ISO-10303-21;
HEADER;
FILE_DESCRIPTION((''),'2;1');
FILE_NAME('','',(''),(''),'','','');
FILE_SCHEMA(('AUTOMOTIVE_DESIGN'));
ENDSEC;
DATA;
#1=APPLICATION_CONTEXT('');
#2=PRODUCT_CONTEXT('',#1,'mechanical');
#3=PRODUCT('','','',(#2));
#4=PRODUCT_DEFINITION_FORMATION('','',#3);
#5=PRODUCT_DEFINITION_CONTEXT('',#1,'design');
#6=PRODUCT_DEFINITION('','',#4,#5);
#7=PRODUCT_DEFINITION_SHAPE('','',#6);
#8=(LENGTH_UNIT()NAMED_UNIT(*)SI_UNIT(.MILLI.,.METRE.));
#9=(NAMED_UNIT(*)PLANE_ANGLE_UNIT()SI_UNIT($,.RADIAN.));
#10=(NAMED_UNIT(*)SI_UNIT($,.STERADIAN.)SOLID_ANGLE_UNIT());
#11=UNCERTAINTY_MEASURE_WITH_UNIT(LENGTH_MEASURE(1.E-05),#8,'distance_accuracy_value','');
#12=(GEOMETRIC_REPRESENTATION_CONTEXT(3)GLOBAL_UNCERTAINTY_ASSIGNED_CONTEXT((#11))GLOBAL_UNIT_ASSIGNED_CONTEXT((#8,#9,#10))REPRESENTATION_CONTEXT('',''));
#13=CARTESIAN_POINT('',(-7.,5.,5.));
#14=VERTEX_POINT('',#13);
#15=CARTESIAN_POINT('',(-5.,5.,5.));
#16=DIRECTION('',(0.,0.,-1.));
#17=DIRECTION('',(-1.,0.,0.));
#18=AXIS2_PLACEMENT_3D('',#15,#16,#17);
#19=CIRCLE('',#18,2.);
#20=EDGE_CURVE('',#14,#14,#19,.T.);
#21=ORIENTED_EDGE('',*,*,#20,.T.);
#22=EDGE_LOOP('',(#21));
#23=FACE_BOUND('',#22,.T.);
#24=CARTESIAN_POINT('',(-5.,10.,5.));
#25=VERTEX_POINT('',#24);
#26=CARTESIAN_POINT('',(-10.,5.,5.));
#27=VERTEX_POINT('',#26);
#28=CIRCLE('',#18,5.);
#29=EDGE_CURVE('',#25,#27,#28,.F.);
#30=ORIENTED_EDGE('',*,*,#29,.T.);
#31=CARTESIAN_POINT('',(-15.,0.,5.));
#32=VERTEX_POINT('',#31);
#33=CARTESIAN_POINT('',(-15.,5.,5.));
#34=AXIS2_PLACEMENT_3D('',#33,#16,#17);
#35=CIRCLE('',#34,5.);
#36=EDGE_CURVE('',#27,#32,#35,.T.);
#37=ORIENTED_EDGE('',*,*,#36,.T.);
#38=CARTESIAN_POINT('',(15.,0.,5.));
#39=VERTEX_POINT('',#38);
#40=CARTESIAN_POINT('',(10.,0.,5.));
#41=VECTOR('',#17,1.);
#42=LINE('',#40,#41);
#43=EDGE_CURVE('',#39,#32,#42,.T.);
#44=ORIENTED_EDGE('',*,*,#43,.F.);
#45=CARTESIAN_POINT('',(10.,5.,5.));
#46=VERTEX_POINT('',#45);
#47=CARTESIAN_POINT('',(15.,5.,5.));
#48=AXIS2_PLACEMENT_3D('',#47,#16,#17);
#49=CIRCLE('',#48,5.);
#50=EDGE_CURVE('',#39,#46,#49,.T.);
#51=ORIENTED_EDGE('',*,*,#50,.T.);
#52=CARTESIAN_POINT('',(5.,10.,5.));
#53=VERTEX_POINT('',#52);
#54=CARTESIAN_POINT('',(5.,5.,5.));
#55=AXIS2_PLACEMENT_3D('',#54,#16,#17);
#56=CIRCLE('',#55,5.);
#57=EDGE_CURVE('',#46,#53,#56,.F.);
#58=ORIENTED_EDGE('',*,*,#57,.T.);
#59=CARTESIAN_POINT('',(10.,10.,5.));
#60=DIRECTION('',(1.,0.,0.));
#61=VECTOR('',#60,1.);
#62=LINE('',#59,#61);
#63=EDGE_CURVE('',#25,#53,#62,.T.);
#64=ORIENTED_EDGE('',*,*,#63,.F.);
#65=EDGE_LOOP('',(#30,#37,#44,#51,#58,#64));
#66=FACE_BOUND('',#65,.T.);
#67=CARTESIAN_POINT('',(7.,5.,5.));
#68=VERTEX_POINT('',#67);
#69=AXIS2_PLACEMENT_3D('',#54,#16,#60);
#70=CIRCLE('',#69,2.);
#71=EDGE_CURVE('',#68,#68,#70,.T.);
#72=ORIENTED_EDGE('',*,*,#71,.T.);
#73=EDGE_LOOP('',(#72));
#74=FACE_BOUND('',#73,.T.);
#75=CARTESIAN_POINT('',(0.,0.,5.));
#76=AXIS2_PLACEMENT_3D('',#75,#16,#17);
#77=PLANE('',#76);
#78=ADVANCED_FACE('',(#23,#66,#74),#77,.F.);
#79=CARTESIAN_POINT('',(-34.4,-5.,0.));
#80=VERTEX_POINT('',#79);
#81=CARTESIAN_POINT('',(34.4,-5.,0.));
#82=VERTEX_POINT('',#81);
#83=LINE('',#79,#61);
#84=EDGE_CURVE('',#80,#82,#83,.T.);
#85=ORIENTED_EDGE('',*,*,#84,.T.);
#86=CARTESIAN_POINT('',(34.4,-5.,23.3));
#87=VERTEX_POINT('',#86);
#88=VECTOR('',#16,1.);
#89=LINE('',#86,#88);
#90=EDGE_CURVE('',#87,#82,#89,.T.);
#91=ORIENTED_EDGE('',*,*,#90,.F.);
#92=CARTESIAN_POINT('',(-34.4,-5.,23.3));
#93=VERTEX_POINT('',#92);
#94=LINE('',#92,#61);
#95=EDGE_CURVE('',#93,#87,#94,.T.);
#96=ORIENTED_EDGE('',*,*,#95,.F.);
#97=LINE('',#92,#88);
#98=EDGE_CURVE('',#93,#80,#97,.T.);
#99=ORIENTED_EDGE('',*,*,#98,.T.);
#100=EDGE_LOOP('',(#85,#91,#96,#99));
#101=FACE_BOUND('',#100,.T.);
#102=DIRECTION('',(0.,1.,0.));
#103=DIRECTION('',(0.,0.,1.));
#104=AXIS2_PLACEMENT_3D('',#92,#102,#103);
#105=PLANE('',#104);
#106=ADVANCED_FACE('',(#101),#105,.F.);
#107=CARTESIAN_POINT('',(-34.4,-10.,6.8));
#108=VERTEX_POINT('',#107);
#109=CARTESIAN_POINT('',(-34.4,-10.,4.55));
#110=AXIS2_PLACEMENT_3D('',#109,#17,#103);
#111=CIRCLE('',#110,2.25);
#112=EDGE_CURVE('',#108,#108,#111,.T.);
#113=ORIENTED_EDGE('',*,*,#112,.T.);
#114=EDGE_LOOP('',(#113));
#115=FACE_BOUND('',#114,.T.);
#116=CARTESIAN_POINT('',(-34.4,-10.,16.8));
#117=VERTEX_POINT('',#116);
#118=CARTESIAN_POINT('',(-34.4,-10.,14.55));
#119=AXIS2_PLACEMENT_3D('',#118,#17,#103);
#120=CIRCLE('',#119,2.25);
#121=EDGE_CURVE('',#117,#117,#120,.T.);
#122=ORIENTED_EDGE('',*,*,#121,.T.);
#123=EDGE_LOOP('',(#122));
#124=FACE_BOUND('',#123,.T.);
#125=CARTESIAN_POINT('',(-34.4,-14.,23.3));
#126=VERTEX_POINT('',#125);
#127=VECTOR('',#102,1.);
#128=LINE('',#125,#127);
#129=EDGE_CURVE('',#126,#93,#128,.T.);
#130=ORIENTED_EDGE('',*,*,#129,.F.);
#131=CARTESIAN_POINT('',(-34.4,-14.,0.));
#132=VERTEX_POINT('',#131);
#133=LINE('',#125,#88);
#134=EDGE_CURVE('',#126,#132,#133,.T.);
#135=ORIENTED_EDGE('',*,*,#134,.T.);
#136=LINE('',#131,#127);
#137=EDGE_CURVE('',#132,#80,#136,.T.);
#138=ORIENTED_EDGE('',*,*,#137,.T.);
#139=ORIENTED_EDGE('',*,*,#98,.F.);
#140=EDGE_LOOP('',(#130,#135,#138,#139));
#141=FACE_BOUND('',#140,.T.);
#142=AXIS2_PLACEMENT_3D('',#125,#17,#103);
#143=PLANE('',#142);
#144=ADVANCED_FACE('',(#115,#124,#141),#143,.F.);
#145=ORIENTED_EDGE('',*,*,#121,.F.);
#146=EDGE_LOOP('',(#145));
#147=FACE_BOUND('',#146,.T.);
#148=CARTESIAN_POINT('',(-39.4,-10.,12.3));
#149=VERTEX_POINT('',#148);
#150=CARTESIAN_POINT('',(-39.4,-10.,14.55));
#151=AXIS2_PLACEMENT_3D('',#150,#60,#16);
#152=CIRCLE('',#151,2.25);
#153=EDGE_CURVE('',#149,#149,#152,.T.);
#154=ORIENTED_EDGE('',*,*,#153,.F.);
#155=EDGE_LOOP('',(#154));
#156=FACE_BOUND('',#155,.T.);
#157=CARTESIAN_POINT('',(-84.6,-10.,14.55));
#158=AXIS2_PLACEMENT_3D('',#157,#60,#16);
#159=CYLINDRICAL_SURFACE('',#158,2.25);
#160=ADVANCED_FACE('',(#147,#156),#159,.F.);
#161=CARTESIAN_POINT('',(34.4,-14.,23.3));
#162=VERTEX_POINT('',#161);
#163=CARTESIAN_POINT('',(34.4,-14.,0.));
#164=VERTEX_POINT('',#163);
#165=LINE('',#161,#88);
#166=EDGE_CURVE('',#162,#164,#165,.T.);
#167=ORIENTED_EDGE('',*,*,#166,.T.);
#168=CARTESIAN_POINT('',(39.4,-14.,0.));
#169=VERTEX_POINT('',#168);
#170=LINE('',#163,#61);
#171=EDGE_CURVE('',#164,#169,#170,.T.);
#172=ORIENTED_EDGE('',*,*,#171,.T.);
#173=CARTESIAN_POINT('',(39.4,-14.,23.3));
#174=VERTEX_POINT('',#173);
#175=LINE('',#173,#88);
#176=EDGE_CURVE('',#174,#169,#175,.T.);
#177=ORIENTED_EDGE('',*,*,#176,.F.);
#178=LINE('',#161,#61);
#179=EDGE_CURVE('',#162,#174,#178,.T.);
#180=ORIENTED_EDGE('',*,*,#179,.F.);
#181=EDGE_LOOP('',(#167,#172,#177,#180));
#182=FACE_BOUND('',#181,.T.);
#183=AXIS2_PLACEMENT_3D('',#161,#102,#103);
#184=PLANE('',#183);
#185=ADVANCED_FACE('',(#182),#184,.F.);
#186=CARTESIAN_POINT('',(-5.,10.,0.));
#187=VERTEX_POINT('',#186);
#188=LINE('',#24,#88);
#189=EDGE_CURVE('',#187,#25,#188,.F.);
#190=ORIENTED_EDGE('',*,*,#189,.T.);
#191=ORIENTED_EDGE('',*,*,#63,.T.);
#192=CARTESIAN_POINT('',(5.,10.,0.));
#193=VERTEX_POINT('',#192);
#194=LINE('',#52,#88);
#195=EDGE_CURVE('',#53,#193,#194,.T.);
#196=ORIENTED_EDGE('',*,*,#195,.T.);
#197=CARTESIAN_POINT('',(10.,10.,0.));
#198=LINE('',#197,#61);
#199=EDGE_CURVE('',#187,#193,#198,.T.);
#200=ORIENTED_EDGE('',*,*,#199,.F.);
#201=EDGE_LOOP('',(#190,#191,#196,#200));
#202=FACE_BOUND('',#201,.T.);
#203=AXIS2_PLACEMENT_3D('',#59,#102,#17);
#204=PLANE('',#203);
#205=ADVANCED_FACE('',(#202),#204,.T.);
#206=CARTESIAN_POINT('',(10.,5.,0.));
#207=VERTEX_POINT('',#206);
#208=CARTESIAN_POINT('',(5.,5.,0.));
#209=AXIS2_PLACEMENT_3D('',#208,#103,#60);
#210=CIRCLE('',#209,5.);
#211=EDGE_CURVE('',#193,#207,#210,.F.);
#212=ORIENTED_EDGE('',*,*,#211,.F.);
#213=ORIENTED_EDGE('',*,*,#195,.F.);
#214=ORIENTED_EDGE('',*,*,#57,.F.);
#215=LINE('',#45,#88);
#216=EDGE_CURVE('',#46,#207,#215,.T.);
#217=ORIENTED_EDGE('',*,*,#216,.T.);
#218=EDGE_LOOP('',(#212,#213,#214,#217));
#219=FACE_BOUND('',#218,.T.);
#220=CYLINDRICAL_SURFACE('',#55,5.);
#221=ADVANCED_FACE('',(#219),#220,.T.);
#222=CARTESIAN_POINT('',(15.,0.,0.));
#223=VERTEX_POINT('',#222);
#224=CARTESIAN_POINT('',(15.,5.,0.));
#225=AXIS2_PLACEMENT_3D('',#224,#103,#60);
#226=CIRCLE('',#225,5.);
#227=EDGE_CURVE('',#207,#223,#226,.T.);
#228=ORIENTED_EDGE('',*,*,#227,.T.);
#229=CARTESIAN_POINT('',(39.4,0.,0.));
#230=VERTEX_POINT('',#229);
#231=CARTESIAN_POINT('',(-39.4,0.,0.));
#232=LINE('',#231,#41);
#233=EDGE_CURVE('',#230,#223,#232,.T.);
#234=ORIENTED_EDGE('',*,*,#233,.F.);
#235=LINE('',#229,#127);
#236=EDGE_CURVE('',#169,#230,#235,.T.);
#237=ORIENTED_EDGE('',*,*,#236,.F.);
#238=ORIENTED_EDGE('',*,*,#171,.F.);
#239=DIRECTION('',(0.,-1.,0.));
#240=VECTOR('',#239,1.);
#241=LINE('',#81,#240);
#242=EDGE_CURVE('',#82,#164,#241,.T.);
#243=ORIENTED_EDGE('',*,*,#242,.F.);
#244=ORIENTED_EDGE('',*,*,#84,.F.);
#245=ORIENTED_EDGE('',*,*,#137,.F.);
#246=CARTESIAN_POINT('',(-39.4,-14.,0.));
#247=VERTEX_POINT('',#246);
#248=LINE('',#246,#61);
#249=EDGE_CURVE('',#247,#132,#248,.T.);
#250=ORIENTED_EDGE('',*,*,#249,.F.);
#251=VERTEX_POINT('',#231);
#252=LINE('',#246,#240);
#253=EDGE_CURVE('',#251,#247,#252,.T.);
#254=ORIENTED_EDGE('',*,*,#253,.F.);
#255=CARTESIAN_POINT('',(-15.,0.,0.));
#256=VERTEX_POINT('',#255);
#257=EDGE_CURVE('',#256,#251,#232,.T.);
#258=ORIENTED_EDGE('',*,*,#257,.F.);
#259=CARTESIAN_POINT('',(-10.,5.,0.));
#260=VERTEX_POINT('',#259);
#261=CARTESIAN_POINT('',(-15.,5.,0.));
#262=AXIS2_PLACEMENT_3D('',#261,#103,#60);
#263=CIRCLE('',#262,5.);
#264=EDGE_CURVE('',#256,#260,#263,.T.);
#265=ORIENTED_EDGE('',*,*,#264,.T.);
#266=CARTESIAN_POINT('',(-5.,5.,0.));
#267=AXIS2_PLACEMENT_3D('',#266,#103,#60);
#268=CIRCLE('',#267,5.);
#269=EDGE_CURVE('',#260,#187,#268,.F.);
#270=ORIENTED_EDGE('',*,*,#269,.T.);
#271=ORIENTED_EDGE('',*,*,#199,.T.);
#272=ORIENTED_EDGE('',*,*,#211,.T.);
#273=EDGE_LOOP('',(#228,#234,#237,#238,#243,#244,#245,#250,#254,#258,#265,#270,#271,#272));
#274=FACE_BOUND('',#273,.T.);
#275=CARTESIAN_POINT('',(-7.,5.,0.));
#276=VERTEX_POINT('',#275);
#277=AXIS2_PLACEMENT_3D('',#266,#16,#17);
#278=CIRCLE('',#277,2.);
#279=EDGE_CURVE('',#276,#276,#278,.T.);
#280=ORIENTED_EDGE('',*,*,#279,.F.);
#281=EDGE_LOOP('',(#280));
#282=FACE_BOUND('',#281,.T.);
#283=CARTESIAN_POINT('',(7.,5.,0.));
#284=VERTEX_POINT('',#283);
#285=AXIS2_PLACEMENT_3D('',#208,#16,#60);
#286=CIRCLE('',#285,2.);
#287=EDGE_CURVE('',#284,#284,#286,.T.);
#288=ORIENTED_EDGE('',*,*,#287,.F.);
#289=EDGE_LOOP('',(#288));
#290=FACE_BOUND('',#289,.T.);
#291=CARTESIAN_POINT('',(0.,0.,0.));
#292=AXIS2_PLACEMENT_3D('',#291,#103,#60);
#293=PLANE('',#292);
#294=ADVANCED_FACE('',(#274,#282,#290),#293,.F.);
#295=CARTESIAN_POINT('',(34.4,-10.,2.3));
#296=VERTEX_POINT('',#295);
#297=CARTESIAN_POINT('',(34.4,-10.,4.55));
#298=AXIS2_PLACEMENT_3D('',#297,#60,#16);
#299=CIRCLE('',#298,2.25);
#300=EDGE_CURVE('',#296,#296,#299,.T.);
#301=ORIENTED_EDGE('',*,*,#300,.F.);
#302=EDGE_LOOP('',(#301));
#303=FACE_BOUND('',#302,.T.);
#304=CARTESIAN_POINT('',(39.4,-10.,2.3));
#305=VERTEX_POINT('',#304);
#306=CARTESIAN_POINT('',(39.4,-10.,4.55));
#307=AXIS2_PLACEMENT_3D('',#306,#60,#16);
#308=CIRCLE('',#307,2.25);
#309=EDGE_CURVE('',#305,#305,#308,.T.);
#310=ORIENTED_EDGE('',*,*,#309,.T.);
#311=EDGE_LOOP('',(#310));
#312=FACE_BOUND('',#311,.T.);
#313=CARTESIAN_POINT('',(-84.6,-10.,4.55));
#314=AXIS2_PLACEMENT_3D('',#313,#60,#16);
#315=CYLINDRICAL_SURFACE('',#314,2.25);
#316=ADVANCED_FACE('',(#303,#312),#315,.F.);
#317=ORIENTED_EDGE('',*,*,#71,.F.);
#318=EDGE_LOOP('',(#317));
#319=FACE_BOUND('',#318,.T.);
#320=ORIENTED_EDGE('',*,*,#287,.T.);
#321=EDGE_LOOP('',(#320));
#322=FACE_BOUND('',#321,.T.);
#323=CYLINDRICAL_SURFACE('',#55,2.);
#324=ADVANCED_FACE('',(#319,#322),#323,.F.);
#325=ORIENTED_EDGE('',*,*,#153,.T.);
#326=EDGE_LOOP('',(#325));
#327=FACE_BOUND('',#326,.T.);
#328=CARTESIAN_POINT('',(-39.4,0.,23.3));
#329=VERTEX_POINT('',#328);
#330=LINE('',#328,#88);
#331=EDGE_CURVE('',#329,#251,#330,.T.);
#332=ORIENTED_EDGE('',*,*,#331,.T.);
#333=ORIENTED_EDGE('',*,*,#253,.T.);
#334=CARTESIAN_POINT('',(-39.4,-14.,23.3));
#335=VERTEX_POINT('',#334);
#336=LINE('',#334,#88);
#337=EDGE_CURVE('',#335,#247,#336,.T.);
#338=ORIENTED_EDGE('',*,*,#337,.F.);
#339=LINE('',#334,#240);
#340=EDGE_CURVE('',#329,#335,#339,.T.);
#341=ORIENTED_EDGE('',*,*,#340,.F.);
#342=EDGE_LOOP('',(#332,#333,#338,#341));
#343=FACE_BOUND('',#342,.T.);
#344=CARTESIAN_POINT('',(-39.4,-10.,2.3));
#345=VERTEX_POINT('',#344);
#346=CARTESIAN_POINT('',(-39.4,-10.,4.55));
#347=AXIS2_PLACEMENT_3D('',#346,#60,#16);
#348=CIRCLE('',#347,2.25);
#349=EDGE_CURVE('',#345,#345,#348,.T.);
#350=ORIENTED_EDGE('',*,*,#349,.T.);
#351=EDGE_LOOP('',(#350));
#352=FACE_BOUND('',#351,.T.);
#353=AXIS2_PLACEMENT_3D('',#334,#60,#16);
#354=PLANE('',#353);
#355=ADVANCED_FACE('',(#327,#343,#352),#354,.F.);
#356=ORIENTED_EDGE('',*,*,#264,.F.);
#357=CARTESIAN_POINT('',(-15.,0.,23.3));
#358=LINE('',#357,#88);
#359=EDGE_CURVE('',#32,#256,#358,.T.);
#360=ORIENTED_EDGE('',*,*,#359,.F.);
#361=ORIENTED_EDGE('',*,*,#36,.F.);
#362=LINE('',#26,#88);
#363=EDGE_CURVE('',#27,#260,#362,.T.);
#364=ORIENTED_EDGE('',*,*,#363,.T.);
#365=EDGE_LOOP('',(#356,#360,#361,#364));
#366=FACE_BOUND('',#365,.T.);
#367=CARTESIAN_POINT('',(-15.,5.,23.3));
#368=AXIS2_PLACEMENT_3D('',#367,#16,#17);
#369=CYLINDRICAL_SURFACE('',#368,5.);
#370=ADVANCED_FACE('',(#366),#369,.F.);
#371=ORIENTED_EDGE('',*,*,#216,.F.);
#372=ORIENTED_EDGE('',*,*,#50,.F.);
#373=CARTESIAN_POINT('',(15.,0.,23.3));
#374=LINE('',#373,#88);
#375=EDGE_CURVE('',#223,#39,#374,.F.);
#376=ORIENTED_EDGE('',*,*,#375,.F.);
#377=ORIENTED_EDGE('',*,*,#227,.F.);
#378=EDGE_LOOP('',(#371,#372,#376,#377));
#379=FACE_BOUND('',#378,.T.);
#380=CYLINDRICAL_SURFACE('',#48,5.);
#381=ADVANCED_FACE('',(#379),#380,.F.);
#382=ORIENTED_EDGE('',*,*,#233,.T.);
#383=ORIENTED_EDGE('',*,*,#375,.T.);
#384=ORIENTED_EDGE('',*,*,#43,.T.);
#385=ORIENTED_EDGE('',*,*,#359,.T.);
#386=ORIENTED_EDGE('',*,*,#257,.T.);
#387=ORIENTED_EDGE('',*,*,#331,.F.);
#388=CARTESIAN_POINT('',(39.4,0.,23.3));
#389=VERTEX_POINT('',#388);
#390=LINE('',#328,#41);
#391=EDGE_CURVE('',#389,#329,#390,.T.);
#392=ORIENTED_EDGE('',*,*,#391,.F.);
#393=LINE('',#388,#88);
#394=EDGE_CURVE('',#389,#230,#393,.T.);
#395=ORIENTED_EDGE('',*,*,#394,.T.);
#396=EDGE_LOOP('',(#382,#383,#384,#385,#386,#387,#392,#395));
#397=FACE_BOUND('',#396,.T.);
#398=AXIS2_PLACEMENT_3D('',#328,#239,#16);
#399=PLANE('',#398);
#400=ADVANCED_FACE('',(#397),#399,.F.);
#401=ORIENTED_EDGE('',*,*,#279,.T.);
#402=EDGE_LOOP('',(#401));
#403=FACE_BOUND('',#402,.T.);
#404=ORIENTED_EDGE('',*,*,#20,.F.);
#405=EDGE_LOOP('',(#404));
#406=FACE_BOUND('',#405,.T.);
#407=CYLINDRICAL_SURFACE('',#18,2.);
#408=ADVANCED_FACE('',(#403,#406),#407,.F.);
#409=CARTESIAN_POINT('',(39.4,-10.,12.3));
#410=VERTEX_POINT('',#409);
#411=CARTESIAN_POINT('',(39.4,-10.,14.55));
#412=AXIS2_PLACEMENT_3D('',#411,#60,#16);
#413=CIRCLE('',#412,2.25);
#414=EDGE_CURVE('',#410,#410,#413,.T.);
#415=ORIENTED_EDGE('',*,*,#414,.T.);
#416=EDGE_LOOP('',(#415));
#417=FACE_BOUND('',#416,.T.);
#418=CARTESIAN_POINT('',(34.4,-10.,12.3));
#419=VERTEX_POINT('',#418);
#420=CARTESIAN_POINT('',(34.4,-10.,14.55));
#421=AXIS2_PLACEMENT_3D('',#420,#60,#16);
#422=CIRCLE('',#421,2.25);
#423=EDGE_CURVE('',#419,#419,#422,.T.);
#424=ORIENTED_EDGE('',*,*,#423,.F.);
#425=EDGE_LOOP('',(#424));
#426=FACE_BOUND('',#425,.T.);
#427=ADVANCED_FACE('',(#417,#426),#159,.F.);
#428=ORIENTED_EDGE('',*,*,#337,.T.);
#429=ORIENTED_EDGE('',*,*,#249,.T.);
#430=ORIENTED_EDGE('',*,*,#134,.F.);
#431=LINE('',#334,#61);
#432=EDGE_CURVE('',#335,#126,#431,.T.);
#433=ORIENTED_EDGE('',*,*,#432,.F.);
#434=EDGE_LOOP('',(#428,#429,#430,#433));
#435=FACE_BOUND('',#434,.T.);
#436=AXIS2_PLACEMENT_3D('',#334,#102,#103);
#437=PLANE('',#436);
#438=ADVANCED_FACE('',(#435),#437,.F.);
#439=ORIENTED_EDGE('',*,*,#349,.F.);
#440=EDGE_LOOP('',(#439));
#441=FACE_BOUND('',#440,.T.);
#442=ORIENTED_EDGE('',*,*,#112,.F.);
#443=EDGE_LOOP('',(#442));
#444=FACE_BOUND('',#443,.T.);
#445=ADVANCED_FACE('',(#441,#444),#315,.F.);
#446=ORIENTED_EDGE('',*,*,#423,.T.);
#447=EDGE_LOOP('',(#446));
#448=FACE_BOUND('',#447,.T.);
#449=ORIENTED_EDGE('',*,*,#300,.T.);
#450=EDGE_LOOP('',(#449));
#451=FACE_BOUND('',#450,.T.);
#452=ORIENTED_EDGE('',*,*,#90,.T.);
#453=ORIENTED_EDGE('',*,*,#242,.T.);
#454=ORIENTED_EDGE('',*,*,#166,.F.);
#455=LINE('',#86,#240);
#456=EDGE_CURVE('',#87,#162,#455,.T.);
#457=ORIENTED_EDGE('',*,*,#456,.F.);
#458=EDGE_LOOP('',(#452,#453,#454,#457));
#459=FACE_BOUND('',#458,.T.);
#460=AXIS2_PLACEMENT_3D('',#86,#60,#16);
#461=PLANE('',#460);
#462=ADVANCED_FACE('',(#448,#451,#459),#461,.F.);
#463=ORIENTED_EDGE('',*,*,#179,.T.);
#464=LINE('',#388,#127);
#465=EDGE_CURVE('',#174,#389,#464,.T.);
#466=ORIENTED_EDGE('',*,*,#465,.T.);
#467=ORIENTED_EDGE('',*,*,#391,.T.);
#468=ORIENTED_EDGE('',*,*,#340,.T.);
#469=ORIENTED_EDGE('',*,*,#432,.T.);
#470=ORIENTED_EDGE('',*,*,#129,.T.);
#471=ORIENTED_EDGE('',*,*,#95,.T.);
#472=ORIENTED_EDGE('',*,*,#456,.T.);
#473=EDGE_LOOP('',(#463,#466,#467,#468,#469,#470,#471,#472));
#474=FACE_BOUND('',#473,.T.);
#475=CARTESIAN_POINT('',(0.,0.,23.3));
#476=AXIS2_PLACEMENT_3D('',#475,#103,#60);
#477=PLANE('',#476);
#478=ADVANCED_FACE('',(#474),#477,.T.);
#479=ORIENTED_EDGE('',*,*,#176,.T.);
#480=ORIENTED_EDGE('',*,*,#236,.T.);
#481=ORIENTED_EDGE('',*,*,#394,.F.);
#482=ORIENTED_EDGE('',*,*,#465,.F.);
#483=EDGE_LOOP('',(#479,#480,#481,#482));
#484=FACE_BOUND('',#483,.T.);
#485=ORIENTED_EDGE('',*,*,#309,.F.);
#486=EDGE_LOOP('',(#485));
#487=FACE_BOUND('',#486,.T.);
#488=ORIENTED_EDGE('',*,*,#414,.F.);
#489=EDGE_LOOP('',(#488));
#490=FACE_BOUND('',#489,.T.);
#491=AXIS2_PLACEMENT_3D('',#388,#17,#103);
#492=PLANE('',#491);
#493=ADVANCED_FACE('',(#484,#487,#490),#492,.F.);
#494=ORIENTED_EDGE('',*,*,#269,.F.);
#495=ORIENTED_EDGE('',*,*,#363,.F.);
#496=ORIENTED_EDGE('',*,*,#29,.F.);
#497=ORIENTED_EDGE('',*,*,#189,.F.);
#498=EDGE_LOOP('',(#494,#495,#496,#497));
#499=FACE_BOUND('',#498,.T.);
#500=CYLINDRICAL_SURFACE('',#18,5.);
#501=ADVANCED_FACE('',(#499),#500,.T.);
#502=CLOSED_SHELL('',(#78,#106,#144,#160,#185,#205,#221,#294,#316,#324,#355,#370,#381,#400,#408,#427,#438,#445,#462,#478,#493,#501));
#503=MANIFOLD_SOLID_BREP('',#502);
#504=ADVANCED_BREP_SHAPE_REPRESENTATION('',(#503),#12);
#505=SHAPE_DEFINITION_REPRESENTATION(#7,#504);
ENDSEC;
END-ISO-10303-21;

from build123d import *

# Parameters (mm, degrees)
BOSS_EXTRUDE1_DEPTH = 23.3
SKETCH2_W           = 20
SKETCH2_H           = 10
SKETCH2_R           = 2
BOSS_EXTRUDE2_DEPTH = 5
FILLET1_START       = -1
FILLET1_DEPTH       = 6
FILLET1_2_DEPTH     = 5
SKETCH3_R           = 2.25
CUT_EXTRUDE1_DEPTH  = 124


with BuildPart() as part:
    # Sketch1 → Boss-Extrude1 (new body)
    with BuildSketch(Plane.XY):
        Polygon((-39.4, -14), (-39.4, 0), (39.4, 0), (39.4, -14), (34.4, -14), (34.4, -5), (-34.4, -5), (-34.4, -14), align=None)
    extrude(amount=BOSS_EXTRUDE1_DEPTH)

    # Sketch2 → Boss-Extrude2 (add)
    with BuildSketch(Plane(origin=(0, 0, 0), x_dir=(-1, 0, 0), z_dir=(0, 0, -1))):
        with Locations((0, 5)):
            Rectangle(SKETCH2_W, SKETCH2_H)
        with Locations((5, 5)):
            Circle(SKETCH2_R, mode=Mode.SUBTRACT)
        with Locations(Location((-5, 5, 0), (0, 0, 180))):
            Circle(SKETCH2_R, mode=Mode.SUBTRACT)
    extrude(amount=-BOSS_EXTRUDE2_DEPTH)

    # Fillet1: read off the stored shape, not the designer's step
    # Fillet1 outline → Fillet1 (cut)
    with BuildSketch(Plane.XY.offset(FILLET1_START)):
        with BuildLine():
            Line((-10, 10), (-10, 5))
            ThreePointArc((-10, 5), (-8.535533906, 8.535533906), (-5, 10))
            Line((-5, 10), (-10, 10))
        make_face()
        with BuildLine():
            Line((10, 10), (5, 10))
            ThreePointArc((5, 10), (8.535533906, 8.535533906), (10, 5))
            Line((10, 5), (10, 10))
        make_face()
    extrude(amount=FILLET1_DEPTH, mode=Mode.SUBTRACT)

    # Fillet1 2 outline → Fillet1 2 (add)
    with BuildSketch(Plane.XY):
        with BuildLine():
            Line((-10, 0), (-10, 5))
            ThreePointArc((-10, 5), (-11.464466094, 1.464466094), (-15, 0))
            Line((-15, 0), (-10, 0))
        make_face()
        with BuildLine():
            Line((10, 5), (10, 0))
            Line((10, 0), (15, 0))
            ThreePointArc((15, 0), (11.464466094, 1.464466094), (10, 5))
        make_face()
    extrude(amount=FILLET1_2_DEPTH)

    # Sketch3 → Cut-Extrude1 (cut)
    with BuildSketch(Plane(origin=(39.4, 0, 0), x_dir=(0, 0, -1), z_dir=(1, 0, 0))):
        with Locations((-4.55, -10)):
            Circle(SKETCH3_R)
        with Locations((-14.55, -10)):
            Circle(SKETCH3_R)
    extrude(amount=-CUT_EXTRUDE1_DEPTH, mode=Mode.SUBTRACT)


solid = part.part
